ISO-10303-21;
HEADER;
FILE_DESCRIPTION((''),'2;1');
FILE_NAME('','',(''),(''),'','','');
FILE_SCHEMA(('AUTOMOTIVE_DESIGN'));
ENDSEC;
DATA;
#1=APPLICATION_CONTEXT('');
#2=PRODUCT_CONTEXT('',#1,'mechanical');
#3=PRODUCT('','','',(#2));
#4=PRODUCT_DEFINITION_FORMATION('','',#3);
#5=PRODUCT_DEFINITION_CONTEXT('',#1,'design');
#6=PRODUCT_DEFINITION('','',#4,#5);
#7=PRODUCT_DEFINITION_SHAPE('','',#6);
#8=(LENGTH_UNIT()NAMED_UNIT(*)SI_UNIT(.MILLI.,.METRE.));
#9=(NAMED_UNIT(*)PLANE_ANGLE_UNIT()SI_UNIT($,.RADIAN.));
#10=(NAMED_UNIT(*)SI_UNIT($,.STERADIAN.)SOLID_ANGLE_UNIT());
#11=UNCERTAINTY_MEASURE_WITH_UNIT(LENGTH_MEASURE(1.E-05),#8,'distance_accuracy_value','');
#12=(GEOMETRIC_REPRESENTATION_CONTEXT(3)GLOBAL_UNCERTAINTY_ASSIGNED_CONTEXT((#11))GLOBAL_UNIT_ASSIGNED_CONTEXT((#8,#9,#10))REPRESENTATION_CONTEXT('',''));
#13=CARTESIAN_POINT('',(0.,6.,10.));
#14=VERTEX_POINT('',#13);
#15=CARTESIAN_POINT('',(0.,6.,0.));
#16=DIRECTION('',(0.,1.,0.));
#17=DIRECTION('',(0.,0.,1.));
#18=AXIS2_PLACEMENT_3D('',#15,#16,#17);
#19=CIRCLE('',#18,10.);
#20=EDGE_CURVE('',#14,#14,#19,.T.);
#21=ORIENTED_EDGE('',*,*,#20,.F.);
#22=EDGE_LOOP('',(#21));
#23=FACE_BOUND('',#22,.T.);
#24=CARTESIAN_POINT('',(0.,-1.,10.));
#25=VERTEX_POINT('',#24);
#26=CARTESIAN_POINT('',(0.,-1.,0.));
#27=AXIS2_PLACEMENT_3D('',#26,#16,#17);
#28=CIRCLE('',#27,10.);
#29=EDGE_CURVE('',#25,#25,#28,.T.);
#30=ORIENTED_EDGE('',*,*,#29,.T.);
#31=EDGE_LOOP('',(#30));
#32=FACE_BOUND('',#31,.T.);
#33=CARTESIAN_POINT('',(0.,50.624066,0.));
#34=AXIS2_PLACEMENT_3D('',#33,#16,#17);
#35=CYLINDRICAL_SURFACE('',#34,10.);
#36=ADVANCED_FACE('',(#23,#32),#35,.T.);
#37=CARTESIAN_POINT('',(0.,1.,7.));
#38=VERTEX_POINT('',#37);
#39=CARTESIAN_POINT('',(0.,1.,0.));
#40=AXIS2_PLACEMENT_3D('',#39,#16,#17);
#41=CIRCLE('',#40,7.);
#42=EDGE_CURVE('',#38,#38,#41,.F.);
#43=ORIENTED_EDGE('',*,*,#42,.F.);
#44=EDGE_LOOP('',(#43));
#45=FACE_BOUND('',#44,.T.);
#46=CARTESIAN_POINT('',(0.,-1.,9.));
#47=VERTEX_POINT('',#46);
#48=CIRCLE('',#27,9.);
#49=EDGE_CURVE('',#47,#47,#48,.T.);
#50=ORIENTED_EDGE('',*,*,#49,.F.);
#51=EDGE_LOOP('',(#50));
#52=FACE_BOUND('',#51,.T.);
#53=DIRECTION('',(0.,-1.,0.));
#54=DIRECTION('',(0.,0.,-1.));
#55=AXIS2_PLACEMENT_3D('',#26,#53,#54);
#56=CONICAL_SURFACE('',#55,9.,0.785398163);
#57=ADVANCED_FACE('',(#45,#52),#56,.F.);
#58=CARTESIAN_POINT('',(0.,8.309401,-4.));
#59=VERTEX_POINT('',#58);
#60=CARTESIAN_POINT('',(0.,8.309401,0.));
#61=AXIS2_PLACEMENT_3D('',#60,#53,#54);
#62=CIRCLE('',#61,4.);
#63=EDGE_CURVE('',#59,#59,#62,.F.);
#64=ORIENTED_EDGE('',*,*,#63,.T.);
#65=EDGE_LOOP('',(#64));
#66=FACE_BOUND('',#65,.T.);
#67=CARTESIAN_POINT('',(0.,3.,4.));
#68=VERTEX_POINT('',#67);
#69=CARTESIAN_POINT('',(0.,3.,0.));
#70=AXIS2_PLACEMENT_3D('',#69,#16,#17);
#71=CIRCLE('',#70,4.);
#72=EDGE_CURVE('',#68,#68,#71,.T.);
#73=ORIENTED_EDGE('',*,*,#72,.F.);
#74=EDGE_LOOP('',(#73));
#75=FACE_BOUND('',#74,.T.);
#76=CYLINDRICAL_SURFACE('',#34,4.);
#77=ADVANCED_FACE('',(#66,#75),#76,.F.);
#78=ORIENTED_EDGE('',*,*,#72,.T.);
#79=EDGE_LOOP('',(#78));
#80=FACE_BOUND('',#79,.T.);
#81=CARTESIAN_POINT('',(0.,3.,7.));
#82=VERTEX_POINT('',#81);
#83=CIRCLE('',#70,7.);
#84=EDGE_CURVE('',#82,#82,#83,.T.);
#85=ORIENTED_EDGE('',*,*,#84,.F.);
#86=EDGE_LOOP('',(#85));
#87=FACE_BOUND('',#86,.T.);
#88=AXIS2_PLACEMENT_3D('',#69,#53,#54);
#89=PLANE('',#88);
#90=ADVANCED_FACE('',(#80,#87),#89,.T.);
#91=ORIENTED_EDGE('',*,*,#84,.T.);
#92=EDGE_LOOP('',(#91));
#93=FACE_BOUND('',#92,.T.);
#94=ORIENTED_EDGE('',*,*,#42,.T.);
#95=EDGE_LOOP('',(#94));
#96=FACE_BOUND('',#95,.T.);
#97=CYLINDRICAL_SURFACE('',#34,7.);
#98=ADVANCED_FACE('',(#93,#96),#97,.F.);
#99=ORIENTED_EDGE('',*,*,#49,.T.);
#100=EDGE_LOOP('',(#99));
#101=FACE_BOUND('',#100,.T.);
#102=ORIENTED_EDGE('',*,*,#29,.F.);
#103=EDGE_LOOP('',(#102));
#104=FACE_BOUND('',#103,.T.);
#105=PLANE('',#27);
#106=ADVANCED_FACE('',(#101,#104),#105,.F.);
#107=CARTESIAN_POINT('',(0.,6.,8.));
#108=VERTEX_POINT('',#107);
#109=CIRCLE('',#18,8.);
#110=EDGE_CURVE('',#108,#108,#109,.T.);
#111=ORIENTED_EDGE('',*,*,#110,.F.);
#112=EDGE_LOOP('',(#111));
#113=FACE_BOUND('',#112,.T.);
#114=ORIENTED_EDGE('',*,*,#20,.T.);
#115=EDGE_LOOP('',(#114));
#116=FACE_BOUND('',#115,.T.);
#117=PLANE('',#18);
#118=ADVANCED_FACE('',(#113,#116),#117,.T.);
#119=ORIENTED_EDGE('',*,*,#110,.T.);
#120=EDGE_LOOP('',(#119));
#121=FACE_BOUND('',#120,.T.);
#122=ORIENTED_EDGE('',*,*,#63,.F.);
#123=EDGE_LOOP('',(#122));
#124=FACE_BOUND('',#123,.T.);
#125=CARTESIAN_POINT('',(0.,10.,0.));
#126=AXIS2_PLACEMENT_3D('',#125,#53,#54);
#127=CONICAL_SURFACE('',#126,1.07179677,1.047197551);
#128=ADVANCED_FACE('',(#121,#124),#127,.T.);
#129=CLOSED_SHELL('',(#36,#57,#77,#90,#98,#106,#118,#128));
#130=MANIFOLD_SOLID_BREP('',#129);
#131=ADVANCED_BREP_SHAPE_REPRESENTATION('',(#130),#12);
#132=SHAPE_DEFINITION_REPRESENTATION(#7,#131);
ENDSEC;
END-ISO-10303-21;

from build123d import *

# Parameters (mm, degrees)
CHAMFER6_SIZE   = 4
CHAMFER6_SIZE_2 = 6.92820323
CHAMFER4_SIZE   = 2


with BuildPart() as part:
    # Sketch3 → Revolve2 (revolve)
    with BuildSketch(Plane.XY, mode=Mode.PRIVATE) as revolve2_sk:
        Polygon((8, 6), (8, 10), (4, 10), (4, 6), (4, 3), (7, 3), (7, 1), (7, -1), (10, -1), (10, 6), align=None)
    revolve(revolve2_sk.sketch.rotate(Axis((0, 50.624065585, 0), (0, -1, 0)), 90), axis=Axis((0, 50.624065585, 0), (0, -1, 0)))

    # Chamfer6
    # the kernel refuses this chamfer: 6.92820323, 4 mm, written as the material it takes off along each edge
    with BuildSketch(Plane(origin=(0, 10, 0), x_dir=(0, 0, 1), z_dir=(1, 0, 0))) as chamfer6_piece_1_section:
        Polygon((8, CHAMFER6_SIZE), (8 - CHAMFER6_SIZE_2, 0), (8, 0), align=None)
    chamfer6_piece_1 = revolve(axis=Axis((0, 10, 0), (0, -1, 0)), mode=Mode.PRIVATE)
    chamfer6_piece_1 = split(chamfer6_piece_1, bisect_by=Plane(origin=(0, 6, -4.457093256), z_dir=(0, 1, 0)), keep=Keep.TOP, mode=Mode.PRIVATE)
    add(chamfer6_piece_1, mode=Mode.SUBTRACT)

    # Chamfer4
    chamfer4_edges = [part.edges().sort_by_distance(p)[0] for p in [
        (0, -1, -7),
    ]]
    chamfer(chamfer4_edges, length=CHAMFER4_SIZE)


solid = part.part
